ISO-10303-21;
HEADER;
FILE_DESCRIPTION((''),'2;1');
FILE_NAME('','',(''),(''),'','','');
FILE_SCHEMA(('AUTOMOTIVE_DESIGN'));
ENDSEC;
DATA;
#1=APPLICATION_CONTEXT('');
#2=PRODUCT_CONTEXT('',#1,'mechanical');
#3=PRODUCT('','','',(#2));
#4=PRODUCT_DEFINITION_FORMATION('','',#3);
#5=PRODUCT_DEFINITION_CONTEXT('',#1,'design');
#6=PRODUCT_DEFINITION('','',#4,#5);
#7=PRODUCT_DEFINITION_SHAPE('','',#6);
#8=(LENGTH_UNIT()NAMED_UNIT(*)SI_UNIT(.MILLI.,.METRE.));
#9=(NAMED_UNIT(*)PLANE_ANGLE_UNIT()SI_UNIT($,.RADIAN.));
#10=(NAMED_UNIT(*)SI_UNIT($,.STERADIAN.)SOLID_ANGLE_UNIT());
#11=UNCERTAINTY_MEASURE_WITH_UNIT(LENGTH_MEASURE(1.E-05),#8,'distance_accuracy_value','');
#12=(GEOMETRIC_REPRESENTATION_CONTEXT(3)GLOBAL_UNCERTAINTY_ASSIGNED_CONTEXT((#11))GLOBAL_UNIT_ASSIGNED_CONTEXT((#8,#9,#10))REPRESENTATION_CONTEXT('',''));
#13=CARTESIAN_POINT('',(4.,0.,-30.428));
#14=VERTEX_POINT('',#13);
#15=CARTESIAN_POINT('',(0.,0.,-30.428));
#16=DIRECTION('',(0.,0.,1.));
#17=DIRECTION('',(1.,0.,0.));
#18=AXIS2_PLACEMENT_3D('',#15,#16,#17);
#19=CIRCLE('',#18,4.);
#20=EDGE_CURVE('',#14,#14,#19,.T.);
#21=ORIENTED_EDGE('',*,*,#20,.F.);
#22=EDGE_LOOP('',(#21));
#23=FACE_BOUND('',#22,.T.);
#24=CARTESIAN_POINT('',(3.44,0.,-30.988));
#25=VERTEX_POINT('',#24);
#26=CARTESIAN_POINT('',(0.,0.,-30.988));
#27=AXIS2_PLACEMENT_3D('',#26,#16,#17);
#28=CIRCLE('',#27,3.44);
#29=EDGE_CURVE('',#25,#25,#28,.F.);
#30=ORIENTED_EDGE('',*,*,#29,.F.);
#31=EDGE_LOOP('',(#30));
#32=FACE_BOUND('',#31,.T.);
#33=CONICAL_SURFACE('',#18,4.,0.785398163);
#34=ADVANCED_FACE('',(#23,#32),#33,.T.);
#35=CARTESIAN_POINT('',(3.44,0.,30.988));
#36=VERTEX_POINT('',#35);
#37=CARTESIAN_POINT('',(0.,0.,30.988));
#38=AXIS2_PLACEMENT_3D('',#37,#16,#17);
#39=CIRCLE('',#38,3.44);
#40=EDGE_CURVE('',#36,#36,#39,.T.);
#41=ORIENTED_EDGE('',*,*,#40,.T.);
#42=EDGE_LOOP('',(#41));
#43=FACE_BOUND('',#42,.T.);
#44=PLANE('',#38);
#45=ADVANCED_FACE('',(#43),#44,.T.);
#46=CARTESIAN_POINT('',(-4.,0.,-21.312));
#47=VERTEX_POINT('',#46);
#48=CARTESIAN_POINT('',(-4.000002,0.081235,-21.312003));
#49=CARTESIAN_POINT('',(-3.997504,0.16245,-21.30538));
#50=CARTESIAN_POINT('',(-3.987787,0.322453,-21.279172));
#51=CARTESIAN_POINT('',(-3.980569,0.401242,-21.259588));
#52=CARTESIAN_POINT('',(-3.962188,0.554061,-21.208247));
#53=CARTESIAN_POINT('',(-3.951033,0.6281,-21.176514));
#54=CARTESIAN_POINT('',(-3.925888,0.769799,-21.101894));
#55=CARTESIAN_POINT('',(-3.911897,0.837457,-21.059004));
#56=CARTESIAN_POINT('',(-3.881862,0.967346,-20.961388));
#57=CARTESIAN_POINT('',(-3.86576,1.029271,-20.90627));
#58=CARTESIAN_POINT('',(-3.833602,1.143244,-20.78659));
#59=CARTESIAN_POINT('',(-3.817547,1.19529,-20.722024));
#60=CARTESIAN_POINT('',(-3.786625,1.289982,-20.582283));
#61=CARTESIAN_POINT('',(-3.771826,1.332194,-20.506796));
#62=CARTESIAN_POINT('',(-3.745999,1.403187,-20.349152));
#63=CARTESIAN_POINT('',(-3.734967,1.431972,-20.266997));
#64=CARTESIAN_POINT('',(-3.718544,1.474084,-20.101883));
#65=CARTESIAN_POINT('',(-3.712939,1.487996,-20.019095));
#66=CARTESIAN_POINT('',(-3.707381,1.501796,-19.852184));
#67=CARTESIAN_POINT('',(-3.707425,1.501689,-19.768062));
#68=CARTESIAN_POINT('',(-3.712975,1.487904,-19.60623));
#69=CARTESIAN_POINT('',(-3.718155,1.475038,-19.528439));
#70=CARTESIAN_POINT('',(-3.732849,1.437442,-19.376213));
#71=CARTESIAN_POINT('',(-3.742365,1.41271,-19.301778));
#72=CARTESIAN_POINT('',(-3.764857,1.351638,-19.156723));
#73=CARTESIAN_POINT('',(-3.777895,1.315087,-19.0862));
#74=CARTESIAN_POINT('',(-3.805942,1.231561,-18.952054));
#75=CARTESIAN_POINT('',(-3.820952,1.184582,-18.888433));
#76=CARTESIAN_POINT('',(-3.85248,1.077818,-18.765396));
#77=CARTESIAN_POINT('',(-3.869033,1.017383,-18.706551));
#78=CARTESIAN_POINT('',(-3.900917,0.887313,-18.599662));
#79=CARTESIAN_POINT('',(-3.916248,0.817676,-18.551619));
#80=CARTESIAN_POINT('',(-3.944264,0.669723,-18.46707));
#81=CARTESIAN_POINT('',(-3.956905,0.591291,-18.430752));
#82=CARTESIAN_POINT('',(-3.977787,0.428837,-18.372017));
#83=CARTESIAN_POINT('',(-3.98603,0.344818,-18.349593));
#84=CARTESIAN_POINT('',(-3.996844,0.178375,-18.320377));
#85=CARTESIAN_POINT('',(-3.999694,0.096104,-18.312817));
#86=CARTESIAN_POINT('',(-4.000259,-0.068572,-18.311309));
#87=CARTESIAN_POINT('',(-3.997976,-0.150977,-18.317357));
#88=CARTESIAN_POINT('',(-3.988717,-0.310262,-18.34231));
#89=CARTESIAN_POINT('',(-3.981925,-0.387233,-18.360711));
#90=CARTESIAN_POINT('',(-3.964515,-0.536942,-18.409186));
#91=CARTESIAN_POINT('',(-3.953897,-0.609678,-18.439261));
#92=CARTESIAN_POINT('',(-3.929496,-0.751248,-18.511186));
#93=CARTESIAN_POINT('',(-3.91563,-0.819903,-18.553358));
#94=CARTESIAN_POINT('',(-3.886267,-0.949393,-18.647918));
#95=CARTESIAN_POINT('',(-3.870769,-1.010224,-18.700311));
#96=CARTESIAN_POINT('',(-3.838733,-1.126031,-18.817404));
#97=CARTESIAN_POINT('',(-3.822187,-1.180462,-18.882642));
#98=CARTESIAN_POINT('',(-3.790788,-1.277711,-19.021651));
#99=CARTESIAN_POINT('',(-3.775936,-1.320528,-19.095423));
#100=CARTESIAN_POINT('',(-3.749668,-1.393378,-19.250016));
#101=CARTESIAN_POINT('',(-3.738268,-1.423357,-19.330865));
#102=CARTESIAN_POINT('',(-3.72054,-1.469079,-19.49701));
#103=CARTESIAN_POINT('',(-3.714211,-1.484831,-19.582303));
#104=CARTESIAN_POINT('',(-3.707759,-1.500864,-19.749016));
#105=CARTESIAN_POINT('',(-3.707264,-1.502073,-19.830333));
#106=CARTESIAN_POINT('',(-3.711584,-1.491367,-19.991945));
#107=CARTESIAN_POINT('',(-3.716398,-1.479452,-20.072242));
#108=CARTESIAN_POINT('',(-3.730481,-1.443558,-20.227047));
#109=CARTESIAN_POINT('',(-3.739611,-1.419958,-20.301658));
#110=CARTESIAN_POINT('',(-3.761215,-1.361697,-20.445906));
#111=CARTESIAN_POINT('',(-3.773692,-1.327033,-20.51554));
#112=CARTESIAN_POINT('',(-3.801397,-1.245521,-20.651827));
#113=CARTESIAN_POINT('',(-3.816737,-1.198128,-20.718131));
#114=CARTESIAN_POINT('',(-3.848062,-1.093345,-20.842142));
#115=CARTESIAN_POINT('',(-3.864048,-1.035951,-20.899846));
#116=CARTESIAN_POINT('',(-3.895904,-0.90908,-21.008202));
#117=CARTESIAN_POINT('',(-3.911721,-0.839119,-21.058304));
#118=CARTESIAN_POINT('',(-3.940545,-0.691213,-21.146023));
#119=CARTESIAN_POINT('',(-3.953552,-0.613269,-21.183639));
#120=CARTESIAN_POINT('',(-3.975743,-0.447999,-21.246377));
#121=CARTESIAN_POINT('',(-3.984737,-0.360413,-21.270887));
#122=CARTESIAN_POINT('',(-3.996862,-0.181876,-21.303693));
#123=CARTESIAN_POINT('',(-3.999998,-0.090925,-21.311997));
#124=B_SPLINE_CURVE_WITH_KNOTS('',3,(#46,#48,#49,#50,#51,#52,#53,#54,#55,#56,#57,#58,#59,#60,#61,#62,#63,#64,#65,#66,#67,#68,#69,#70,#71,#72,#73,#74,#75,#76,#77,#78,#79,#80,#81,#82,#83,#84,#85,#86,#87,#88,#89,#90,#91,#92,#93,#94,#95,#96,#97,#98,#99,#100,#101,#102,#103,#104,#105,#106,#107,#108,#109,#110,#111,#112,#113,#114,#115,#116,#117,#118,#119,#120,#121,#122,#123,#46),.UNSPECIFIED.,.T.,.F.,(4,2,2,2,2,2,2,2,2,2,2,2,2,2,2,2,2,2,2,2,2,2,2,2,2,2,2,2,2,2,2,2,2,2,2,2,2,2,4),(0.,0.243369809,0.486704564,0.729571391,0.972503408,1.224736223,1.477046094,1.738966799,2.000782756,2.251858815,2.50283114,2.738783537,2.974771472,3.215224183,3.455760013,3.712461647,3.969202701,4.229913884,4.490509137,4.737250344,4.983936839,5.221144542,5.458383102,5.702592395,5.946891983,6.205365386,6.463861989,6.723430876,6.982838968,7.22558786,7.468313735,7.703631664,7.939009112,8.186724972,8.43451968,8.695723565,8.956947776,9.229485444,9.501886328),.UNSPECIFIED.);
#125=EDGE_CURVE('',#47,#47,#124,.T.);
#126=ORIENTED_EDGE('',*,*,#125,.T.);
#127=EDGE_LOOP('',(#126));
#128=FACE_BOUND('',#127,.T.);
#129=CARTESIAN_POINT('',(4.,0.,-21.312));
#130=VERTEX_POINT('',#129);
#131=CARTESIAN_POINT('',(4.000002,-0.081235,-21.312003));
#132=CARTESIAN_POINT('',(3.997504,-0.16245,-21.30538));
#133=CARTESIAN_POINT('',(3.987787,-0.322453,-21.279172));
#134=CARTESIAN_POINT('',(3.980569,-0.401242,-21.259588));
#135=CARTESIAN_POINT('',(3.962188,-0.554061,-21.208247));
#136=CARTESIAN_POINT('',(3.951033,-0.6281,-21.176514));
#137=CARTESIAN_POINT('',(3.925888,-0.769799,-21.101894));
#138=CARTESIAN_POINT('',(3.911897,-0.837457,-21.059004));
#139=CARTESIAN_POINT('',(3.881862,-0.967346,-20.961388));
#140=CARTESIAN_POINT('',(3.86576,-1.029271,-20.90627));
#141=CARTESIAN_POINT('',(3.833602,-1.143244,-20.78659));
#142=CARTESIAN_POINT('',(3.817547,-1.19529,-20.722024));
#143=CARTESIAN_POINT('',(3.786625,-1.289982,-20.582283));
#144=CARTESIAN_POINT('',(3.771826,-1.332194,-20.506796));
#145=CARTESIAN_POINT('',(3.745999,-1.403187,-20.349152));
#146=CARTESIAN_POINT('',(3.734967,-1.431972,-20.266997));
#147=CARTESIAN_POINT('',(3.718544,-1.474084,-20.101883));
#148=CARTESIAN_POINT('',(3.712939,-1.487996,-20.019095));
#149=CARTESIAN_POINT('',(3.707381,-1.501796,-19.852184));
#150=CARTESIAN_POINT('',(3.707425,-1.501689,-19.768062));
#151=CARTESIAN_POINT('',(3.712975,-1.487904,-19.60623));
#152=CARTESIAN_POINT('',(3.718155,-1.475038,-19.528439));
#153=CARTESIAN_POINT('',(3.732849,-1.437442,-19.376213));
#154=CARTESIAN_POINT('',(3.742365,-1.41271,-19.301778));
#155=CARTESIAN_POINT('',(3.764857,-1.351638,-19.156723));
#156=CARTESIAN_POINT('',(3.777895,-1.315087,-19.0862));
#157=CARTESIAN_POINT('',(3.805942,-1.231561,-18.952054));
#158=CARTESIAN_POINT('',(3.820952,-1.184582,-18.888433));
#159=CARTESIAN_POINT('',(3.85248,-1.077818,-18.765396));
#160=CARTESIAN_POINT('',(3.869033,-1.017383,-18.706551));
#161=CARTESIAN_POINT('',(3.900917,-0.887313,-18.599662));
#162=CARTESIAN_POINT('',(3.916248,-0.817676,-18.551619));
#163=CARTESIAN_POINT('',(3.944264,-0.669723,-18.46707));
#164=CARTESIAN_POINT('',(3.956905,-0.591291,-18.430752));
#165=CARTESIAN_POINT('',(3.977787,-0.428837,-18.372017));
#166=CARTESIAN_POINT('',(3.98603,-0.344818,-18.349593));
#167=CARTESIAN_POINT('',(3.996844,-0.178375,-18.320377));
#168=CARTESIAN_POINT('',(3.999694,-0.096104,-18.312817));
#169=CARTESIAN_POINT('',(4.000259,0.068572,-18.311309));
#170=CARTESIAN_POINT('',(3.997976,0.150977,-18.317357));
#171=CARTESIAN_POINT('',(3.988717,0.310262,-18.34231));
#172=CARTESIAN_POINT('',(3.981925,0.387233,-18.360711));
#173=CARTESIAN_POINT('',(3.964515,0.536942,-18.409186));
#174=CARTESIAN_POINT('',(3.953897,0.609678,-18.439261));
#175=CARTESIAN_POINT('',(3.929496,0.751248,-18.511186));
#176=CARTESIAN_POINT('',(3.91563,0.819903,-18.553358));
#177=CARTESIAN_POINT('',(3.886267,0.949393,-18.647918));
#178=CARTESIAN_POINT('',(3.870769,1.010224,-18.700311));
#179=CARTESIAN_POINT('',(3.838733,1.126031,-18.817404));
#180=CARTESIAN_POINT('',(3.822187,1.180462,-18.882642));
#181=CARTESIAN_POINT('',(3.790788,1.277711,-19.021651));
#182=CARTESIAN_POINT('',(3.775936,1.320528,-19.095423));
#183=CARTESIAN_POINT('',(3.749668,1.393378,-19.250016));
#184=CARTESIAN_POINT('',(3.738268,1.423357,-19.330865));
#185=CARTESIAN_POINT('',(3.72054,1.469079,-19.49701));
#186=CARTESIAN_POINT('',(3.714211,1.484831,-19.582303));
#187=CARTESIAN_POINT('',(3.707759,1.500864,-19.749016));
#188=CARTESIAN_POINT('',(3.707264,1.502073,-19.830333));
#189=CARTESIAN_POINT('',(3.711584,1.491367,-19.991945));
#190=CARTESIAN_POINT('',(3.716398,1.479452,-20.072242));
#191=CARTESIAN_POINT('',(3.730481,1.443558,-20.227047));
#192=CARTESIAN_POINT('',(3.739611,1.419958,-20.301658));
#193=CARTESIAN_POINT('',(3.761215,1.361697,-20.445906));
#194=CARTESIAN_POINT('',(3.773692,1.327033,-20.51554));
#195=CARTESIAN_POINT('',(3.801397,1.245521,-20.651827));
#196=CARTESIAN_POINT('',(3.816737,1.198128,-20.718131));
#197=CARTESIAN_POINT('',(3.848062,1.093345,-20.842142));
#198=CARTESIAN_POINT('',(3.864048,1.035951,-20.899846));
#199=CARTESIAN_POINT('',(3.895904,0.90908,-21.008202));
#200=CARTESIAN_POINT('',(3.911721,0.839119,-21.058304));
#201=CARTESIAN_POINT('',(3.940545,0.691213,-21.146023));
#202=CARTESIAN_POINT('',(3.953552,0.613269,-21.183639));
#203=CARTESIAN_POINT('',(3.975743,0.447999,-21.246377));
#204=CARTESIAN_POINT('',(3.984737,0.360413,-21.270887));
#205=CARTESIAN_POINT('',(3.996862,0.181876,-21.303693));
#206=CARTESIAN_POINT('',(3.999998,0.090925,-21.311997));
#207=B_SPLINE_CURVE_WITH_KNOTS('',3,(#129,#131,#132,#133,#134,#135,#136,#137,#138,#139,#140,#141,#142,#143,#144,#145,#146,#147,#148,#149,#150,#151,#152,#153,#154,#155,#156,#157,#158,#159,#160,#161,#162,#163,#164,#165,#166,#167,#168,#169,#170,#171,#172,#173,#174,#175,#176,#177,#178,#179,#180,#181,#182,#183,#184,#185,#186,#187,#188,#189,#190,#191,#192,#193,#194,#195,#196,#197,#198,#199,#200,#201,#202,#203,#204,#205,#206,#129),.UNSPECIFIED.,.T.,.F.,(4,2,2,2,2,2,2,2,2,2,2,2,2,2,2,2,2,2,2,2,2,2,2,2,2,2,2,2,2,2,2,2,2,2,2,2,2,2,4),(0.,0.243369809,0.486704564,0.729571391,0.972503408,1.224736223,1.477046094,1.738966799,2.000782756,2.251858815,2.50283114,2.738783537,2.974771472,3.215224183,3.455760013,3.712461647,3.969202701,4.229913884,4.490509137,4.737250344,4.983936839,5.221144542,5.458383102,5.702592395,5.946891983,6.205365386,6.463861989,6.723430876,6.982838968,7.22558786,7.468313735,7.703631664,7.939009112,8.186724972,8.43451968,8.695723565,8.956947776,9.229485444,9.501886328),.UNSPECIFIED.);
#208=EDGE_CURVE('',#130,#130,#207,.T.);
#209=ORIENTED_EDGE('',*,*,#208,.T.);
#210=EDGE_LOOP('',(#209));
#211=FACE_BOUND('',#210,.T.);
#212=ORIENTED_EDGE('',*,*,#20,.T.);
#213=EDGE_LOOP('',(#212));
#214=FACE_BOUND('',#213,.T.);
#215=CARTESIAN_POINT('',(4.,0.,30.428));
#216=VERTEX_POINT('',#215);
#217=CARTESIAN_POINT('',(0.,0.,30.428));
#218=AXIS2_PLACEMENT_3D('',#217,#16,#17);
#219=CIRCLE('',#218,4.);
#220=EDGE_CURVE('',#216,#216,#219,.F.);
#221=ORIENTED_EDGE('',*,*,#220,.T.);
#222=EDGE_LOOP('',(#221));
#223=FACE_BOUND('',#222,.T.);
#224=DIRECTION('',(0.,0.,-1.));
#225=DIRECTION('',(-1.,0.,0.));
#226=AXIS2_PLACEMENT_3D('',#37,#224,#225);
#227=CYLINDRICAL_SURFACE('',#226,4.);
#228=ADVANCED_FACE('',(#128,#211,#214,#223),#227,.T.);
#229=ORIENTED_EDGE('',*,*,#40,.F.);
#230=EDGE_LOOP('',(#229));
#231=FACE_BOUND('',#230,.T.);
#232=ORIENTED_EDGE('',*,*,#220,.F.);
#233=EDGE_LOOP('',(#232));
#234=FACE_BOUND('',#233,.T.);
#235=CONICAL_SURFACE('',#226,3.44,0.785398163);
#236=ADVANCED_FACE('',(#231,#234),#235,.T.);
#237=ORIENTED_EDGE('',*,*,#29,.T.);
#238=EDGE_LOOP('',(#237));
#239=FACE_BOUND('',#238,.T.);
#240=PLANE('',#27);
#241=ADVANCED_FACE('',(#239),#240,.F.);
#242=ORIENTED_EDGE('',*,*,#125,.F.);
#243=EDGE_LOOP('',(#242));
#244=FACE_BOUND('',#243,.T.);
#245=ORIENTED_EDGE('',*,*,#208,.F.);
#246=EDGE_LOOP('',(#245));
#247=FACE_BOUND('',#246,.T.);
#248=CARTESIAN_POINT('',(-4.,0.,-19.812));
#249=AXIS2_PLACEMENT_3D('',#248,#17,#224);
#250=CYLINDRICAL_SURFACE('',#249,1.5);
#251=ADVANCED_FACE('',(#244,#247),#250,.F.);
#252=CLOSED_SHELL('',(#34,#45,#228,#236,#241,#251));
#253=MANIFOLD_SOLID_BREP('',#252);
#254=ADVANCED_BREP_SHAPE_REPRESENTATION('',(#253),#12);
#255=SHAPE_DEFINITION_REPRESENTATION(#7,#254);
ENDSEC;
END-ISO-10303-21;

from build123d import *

# Parameters (mm, degrees)
BOSS_EXTRUDE1_DEPTH      = 30.988
BOSS_EXTRUDE1_DEPTH_BACK = 30.988
SKETCH1_R                = 4
CUT_EXTRUDE1_START       = -4.000000101
CUT_EXTRUDE1_OUTLINE_R   = 1.500000048
CUT_EXTRUDE1_DEPTH       = 8.000000202
CHAMFER1_SIZE            = 0.56


# Read off the part's stored shape, not the designer's step: Cut-Extrude1
with BuildPart() as part:
    # Sketch1 → Boss-Extrude1 (new, two sides: drawn at the far end of the back side and taken through both)
    with BuildSketch(Plane.XY.offset(-BOSS_EXTRUDE1_DEPTH_BACK)):
        Circle(SKETCH1_R)
    extrude(amount=BOSS_EXTRUDE1_DEPTH + BOSS_EXTRUDE1_DEPTH_BACK)

    # Cut-Extrude1 outline → Cut-Extrude1 (cut)
    with BuildSketch(Plane.YZ.offset(CUT_EXTRUDE1_START)):
        with Locations((0, -19.812)):
            Circle(CUT_EXTRUDE1_OUTLINE_R)
    extrude(amount=CUT_EXTRUDE1_DEPTH, mode=Mode.SUBTRACT)

    # Chamfer1
    chamfer1_edges = [part.edges().sort_by_distance(p)[0] for p in [
        (-4, 0, -30.988),
        (-4, 0, 30.988),
    ]]
    chamfer(chamfer1_edges, length=CHAMFER1_SIZE)


solid = part.part
